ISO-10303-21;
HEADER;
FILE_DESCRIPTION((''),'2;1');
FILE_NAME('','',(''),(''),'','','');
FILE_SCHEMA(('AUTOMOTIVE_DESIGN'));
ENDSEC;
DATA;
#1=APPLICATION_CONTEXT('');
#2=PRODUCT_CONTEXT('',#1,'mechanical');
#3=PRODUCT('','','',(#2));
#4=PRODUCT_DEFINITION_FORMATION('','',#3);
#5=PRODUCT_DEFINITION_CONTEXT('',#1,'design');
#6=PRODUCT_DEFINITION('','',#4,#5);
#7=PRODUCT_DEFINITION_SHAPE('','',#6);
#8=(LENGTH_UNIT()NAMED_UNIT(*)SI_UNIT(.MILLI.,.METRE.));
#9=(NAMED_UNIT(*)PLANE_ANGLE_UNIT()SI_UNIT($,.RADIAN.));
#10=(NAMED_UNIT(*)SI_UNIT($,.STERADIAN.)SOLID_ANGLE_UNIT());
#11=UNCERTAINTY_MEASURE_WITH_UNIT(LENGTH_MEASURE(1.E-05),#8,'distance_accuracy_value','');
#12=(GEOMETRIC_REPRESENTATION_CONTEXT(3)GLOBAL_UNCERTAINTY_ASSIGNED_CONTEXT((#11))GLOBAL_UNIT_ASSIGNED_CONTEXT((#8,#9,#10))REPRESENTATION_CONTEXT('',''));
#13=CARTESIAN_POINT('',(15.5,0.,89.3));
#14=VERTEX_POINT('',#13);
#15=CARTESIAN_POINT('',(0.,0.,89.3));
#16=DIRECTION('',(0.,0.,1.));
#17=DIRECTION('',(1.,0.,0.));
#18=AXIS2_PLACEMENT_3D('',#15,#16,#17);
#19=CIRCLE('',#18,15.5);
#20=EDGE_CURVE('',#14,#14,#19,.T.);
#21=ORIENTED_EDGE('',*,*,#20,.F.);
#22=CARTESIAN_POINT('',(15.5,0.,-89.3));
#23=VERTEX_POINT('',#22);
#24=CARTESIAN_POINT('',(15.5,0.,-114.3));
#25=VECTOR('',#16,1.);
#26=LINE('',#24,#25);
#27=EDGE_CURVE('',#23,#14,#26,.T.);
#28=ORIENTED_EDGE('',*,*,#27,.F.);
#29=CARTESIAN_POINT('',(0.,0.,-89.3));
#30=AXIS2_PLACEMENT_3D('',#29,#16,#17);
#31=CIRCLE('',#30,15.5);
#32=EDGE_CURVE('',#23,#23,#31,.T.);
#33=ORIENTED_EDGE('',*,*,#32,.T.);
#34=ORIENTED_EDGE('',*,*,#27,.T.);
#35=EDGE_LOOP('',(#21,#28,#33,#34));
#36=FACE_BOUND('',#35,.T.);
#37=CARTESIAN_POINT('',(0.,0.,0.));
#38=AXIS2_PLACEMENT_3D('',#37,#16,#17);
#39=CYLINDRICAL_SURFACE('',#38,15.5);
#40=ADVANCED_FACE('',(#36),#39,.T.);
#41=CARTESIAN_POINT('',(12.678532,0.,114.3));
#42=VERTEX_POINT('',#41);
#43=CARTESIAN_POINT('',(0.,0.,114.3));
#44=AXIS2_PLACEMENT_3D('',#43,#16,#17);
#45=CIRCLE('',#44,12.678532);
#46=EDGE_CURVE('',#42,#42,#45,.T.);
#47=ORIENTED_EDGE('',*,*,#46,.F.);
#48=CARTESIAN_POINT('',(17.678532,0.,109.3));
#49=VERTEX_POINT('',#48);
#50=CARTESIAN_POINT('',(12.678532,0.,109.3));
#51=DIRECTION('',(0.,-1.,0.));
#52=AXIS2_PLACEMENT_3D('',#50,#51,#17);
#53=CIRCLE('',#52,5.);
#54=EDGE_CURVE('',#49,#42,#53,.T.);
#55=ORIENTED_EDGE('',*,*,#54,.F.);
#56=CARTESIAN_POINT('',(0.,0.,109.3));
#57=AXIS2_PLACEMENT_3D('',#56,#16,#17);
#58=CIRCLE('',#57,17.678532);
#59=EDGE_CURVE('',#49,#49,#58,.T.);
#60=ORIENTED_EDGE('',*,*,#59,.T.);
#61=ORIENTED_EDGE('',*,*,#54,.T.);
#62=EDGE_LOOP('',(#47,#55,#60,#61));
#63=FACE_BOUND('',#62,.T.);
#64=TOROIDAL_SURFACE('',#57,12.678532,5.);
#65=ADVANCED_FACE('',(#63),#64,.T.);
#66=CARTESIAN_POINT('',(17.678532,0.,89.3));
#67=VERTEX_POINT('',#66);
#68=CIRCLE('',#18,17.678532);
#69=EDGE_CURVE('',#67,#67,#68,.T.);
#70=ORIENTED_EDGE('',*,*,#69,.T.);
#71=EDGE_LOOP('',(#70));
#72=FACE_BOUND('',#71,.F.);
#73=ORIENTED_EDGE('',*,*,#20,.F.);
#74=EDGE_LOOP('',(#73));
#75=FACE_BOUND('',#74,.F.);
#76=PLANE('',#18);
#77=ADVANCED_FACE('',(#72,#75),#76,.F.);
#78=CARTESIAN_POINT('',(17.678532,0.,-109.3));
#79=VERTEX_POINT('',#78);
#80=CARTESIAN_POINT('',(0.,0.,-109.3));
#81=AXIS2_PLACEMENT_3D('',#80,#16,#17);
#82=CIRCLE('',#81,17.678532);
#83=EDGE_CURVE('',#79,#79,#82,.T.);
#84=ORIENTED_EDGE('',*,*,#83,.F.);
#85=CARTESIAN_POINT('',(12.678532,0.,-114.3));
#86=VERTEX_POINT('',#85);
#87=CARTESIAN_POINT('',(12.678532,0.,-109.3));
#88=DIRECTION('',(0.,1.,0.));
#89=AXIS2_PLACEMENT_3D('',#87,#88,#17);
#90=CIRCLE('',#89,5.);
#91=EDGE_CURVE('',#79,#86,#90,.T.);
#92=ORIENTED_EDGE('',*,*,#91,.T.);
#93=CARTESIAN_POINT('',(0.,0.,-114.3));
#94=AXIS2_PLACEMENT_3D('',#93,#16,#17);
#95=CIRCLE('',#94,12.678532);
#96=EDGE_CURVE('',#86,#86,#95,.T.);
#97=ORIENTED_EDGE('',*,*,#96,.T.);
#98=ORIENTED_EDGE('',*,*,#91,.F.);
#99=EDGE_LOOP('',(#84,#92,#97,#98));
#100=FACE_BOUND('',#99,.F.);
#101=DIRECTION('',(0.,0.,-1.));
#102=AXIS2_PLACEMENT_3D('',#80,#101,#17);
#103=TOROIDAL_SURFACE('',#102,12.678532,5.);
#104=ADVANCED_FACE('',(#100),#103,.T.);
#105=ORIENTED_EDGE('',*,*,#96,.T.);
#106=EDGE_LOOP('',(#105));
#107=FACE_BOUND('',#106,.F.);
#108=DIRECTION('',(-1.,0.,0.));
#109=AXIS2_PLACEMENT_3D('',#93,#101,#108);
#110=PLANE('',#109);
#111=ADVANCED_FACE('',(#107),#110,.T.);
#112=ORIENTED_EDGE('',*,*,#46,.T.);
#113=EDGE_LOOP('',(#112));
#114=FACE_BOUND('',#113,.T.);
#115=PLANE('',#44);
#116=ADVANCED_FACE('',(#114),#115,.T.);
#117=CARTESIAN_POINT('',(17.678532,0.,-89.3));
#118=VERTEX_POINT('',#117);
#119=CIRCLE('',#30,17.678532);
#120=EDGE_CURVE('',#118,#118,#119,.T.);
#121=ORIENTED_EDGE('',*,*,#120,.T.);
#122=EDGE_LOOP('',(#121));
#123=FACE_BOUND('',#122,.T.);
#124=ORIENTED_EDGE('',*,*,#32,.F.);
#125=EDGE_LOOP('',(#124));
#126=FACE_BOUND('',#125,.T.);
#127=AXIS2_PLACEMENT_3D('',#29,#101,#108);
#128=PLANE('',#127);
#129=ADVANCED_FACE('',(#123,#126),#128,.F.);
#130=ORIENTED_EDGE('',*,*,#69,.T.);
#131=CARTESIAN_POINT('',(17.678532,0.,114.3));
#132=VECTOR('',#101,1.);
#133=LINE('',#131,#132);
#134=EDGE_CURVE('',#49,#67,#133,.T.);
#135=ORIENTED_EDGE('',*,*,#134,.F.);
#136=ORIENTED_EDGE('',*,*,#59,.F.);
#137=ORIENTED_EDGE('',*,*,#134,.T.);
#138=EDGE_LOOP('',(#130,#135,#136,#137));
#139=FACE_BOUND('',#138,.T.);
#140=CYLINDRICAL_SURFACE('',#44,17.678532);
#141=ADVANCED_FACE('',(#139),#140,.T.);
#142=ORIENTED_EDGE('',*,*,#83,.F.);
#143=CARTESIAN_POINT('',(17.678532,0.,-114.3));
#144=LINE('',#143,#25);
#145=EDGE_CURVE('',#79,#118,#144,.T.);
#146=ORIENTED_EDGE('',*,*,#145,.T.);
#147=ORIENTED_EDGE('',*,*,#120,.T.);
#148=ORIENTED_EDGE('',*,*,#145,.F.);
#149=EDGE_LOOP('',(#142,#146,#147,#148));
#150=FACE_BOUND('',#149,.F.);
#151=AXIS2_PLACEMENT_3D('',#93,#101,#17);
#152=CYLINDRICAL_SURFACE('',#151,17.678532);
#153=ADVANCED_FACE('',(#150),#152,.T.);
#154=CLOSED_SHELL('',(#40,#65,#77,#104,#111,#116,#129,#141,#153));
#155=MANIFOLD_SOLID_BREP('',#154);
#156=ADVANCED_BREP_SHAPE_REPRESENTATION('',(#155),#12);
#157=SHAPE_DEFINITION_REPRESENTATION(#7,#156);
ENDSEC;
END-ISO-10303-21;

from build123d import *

# Parameters (mm, degrees)
F0_R          = 15.5
F1_DEPTH      = 114.3
F1_DEPTH_BACK = 114.3
F2_R          = 17.6785322686
F2_R_2        = 15.5
F3_DEPTH      = 25
F4_R          = 5


# Not quite as in the source:
# - a pattern or mirror of a feature is missing from the dataset's text; its kind, count and spacing are read off the source's solid


with BuildPart() as f1:
    # F0 (on Top) → F1 (new body, two sides)
    with BuildSketch(Plane.XY) as f1_sk:
        Circle(F0_R)
    extrude(amount=F1_DEPTH)
    extrude(f1_sk.sketch, amount=-F1_DEPTH_BACK)

    # F2 (on face) → F3 (join)
    with BuildSketch(Plane.XY.offset(114.3)):
        Circle(F2_R)
        Circle(F2_R_2, mode=Mode.SUBTRACT)
        Circle(F2_R_2)
    f3 = extrude(amount=-F3_DEPTH)

    # F3_copies: F3 across plane
    add(f3.mirror(Plane(origin=(0, 0, 0), x_dir=(-1, 0, 0), z_dir=(0, 0, -1))))

    # F4
    f4_edges = [f1.edges().sort_by_distance(p)[0] for p in [
        (-17.678532, 0, 114.3),
        (-17.678532, 0, -114.3),
    ]]
    fillet(f4_edges, radius=F4_R)


solid = f1.part
